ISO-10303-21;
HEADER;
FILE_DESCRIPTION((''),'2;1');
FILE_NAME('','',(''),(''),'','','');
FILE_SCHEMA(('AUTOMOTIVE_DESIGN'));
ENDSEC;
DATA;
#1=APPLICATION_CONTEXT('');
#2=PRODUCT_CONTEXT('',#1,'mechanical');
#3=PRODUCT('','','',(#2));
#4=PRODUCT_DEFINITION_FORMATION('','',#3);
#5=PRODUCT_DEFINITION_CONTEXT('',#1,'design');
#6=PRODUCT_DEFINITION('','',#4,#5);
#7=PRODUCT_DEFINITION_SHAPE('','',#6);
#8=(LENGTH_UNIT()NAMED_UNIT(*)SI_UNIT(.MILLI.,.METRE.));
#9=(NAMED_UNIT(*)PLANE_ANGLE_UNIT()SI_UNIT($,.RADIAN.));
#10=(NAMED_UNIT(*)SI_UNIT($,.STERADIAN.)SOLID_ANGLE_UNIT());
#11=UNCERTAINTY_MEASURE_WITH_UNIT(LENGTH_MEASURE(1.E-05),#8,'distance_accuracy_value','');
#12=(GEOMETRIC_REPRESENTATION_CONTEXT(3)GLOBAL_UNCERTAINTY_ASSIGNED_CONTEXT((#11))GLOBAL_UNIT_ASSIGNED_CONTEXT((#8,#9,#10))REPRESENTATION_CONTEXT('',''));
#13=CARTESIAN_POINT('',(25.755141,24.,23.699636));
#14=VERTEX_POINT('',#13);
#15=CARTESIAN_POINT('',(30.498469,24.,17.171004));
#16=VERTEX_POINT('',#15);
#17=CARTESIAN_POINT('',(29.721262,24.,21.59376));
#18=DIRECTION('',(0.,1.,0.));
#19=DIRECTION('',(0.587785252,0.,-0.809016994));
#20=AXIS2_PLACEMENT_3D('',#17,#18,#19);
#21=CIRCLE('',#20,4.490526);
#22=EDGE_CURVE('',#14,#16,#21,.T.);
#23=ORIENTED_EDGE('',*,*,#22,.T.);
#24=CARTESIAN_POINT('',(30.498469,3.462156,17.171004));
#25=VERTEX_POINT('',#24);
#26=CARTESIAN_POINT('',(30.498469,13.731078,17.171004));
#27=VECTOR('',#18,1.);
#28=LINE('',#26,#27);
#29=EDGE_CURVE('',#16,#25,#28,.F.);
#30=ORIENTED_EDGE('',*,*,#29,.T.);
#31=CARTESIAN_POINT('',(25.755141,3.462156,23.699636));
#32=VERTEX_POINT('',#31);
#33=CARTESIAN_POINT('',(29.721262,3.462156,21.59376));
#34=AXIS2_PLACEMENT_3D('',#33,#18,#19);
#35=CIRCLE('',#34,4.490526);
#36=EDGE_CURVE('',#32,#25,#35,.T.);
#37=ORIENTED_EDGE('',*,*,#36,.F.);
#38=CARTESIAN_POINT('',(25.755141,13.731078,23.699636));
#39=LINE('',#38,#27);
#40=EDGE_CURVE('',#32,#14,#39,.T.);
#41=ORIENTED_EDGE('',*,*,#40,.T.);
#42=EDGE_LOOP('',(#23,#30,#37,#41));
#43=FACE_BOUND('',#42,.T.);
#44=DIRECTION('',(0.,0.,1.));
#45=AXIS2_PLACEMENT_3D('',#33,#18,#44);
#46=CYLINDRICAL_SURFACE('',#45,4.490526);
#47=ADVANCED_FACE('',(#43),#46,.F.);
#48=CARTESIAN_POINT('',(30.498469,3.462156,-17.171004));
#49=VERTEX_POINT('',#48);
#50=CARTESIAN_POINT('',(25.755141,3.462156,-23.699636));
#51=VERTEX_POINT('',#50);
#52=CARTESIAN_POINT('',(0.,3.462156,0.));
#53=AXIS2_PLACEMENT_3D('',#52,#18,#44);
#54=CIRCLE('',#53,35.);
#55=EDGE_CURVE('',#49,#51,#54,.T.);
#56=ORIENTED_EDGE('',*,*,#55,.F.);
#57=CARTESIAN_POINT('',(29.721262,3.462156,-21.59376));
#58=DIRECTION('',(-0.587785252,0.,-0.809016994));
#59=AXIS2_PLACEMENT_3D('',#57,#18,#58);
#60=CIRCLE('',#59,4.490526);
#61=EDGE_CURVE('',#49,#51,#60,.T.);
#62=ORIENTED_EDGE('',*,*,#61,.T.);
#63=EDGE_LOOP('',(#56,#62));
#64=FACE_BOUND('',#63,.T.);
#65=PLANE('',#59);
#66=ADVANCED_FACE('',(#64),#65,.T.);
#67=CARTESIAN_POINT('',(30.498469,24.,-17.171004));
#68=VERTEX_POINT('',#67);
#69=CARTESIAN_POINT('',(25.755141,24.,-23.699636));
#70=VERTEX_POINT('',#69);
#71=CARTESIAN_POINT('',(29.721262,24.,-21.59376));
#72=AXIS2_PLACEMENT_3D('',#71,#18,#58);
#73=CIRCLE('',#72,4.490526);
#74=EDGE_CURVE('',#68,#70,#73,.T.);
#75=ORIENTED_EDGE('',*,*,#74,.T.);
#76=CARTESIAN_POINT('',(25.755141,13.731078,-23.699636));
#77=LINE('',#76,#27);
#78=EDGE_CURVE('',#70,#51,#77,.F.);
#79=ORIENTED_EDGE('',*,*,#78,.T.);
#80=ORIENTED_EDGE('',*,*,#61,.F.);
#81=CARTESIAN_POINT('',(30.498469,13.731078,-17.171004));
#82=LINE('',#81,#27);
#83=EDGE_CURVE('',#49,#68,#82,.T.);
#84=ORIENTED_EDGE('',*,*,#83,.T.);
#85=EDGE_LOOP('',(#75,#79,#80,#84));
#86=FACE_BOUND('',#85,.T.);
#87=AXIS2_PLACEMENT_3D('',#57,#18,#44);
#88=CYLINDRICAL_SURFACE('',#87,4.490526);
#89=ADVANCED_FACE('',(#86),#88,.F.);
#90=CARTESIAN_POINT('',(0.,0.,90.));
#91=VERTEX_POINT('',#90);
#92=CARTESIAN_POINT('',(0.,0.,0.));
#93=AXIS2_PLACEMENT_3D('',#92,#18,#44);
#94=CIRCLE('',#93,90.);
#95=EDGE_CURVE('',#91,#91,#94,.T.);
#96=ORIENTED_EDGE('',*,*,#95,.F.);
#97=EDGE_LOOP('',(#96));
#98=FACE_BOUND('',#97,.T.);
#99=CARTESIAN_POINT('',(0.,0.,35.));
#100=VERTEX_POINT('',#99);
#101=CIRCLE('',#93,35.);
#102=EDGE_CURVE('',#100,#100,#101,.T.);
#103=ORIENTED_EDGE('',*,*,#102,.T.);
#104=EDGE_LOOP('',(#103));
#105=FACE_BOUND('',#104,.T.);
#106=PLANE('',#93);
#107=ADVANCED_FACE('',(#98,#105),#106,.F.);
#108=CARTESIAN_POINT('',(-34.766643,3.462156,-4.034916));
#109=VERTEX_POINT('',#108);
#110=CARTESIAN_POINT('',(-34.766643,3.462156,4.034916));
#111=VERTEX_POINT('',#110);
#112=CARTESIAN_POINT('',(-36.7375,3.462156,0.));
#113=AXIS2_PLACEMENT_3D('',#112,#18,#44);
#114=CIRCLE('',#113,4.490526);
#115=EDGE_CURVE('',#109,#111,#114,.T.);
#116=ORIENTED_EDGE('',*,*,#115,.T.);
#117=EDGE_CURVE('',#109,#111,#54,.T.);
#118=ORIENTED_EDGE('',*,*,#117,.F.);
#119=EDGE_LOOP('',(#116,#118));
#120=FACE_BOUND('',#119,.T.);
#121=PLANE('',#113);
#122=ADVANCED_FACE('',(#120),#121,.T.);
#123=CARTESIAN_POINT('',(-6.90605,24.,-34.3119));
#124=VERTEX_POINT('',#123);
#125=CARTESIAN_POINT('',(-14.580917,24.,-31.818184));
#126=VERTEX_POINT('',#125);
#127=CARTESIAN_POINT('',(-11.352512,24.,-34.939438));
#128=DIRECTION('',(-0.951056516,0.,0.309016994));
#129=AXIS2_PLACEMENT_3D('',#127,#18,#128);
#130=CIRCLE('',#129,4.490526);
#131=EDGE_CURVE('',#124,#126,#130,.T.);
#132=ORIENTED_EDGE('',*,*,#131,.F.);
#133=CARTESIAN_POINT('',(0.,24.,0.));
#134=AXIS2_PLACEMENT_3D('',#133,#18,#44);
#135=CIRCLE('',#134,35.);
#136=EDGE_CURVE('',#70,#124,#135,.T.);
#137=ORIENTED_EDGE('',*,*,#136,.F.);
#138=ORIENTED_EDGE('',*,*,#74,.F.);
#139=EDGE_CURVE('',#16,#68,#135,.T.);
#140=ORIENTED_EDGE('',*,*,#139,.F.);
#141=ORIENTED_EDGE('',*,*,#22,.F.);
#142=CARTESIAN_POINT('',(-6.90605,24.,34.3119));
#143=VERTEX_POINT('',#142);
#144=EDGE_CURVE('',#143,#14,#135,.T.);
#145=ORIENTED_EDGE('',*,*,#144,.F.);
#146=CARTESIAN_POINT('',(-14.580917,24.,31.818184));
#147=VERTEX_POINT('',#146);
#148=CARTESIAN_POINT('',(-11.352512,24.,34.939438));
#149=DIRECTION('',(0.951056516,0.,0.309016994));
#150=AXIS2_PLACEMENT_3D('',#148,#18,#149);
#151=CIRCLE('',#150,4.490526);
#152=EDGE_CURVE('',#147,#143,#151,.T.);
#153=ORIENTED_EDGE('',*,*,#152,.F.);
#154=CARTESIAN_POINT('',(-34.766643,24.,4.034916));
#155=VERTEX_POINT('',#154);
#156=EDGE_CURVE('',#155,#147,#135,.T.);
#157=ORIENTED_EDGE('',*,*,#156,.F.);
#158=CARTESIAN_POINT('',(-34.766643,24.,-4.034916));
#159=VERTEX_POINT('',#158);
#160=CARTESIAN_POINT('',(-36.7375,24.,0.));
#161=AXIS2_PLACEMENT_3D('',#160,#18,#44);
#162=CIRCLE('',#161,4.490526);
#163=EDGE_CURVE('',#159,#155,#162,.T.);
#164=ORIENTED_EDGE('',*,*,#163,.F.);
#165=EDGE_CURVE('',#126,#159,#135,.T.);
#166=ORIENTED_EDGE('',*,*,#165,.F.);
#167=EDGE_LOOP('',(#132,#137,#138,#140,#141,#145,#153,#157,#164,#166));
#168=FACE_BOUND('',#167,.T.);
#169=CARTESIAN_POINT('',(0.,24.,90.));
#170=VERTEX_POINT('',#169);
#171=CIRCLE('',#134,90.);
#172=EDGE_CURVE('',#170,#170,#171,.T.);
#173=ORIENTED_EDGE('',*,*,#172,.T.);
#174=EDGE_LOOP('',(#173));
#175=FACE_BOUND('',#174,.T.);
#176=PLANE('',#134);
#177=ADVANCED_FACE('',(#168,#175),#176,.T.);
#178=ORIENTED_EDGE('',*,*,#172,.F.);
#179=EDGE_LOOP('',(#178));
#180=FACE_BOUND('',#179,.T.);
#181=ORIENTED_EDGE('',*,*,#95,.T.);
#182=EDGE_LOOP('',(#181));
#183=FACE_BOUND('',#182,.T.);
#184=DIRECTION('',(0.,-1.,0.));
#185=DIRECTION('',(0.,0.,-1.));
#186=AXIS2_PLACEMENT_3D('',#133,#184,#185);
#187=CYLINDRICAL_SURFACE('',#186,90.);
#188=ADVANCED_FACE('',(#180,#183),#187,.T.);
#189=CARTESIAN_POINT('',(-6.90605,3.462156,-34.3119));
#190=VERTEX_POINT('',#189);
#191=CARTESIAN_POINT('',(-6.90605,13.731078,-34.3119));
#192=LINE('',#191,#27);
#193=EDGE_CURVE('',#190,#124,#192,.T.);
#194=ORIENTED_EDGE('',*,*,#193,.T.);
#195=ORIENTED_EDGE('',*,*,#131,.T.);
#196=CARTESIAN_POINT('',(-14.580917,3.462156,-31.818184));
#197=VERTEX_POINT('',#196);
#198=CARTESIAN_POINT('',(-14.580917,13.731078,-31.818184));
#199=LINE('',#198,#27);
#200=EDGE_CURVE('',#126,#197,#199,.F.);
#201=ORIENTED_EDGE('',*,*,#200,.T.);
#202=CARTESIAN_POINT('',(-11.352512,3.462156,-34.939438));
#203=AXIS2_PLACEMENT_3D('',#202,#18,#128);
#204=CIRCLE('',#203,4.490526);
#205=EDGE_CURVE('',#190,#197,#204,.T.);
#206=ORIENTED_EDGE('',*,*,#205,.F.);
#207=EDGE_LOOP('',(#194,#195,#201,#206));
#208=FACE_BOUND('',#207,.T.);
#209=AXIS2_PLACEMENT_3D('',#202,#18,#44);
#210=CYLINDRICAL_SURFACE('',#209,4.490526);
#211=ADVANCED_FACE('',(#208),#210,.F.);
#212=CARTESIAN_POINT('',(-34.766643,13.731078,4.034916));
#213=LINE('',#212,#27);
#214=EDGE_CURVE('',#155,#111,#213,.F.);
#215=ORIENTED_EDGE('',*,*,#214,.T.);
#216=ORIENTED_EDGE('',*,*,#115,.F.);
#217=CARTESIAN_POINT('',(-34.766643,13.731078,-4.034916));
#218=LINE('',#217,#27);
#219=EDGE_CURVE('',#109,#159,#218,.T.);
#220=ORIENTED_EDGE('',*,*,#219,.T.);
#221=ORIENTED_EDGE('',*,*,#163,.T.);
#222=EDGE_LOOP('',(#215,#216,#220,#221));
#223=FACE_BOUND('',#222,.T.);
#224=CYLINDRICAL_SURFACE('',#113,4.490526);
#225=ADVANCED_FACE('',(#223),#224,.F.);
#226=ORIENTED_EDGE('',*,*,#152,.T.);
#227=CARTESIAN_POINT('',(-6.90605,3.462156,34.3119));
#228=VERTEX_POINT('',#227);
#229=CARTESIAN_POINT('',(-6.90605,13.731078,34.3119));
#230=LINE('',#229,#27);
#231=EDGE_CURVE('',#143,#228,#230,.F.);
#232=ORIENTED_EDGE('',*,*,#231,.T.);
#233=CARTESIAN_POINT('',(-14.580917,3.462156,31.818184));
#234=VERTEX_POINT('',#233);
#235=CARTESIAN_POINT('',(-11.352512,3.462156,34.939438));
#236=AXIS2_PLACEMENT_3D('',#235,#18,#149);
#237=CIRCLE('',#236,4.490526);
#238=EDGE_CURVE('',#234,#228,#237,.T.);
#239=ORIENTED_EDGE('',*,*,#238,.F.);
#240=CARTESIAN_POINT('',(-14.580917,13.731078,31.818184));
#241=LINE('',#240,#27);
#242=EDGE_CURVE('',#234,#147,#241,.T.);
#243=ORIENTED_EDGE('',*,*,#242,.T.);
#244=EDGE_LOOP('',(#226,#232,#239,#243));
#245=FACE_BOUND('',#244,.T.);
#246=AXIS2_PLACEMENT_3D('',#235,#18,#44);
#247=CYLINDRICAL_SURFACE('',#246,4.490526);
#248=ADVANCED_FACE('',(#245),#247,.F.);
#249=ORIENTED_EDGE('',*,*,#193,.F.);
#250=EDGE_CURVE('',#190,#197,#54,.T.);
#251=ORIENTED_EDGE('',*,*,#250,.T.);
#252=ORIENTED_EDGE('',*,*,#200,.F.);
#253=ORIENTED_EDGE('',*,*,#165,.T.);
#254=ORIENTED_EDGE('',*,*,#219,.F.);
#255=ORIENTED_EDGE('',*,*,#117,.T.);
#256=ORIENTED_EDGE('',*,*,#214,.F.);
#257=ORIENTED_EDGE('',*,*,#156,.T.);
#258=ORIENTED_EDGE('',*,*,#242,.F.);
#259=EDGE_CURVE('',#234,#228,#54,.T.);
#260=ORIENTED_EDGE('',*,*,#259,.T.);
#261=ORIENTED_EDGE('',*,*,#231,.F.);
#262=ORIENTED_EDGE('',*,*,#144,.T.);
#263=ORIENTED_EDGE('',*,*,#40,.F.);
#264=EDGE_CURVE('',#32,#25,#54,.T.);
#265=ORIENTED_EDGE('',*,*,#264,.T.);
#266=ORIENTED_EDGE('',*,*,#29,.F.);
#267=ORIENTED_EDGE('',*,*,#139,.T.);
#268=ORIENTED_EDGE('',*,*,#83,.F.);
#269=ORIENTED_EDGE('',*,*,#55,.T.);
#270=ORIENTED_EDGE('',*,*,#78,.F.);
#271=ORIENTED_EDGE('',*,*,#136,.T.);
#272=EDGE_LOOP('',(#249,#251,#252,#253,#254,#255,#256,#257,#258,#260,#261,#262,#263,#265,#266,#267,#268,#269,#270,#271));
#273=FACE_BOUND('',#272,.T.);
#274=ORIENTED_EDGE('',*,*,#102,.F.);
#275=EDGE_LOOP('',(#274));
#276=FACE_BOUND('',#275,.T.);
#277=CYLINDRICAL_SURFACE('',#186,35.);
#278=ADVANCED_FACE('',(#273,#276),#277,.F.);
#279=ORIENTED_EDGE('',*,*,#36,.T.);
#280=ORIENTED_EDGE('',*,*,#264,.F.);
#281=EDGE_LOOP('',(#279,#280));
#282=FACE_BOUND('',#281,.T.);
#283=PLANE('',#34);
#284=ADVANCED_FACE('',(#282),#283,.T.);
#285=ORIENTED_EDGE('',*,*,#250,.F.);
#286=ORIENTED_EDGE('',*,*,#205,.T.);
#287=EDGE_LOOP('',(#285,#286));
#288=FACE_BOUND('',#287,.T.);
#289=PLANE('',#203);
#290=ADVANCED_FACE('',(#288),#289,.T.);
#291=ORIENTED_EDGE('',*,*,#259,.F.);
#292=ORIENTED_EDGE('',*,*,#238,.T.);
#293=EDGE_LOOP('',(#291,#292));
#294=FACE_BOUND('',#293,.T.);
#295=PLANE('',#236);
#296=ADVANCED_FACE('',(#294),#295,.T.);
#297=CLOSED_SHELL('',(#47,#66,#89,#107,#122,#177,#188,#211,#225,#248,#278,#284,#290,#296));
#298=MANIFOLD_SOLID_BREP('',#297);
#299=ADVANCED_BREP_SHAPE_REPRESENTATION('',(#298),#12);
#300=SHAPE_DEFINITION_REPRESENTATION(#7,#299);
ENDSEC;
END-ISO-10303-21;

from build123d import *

# Parameters (mm, degrees)
SKETCH1_R           = 90
BOSS_EXTRUDE1_DEPTH = 24
SKETCH2_R           = 35
CUT_EXTRUDE1_DEPTH  = 130.52219887
SKETCH3_R           = 4.490526197
CUT_EXTRUDE2_DEPTH  = 20.537844313
CIRPATTERN1_COUNT   = 5


with BuildPart() as part:
    # Sketch1 → Boss-Extrude1 (new body)
    with BuildSketch(Plane(origin=(0, 0, 0), x_dir=(1, 0, 0), z_dir=(0, 1, 0))):
        Circle(SKETCH1_R)
    extrude(amount=BOSS_EXTRUDE1_DEPTH)

    # Sketch2 → Cut-Extrude1 (cut, through all)
    with BuildSketch(Plane(origin=(0, 0, 0), x_dir=(1, 0, 0), z_dir=(0, 1, 0))):
        Circle(SKETCH2_R)
    extrude(amount=CUT_EXTRUDE1_DEPTH, mode=Mode.SUBTRACT)

    # Sketch3 → Cut-Extrude2 (cut)
    with BuildSketch(Plane(origin=(0, 24, 0), x_dir=(1, 0, 0), z_dir=(0, 1, 0))):
        with Locations((-36.737499638, 0)):
            Circle(SKETCH3_R)
    cut_extrude2 = extrude(amount=-CUT_EXTRUDE2_DEPTH, mode=Mode.SUBTRACT)

    # CirPattern1: Cut-Extrude2 ×5 about axis
    cirpattern1_axis = Axis((0, 0, 0), (0, 1, 0))
    for i in range(1, CIRPATTERN1_COUNT):
        add(cut_extrude2.rotate(cirpattern1_axis, i * 360 / CIRPATTERN1_COUNT), mode=Mode.SUBTRACT)


solid = part.part
